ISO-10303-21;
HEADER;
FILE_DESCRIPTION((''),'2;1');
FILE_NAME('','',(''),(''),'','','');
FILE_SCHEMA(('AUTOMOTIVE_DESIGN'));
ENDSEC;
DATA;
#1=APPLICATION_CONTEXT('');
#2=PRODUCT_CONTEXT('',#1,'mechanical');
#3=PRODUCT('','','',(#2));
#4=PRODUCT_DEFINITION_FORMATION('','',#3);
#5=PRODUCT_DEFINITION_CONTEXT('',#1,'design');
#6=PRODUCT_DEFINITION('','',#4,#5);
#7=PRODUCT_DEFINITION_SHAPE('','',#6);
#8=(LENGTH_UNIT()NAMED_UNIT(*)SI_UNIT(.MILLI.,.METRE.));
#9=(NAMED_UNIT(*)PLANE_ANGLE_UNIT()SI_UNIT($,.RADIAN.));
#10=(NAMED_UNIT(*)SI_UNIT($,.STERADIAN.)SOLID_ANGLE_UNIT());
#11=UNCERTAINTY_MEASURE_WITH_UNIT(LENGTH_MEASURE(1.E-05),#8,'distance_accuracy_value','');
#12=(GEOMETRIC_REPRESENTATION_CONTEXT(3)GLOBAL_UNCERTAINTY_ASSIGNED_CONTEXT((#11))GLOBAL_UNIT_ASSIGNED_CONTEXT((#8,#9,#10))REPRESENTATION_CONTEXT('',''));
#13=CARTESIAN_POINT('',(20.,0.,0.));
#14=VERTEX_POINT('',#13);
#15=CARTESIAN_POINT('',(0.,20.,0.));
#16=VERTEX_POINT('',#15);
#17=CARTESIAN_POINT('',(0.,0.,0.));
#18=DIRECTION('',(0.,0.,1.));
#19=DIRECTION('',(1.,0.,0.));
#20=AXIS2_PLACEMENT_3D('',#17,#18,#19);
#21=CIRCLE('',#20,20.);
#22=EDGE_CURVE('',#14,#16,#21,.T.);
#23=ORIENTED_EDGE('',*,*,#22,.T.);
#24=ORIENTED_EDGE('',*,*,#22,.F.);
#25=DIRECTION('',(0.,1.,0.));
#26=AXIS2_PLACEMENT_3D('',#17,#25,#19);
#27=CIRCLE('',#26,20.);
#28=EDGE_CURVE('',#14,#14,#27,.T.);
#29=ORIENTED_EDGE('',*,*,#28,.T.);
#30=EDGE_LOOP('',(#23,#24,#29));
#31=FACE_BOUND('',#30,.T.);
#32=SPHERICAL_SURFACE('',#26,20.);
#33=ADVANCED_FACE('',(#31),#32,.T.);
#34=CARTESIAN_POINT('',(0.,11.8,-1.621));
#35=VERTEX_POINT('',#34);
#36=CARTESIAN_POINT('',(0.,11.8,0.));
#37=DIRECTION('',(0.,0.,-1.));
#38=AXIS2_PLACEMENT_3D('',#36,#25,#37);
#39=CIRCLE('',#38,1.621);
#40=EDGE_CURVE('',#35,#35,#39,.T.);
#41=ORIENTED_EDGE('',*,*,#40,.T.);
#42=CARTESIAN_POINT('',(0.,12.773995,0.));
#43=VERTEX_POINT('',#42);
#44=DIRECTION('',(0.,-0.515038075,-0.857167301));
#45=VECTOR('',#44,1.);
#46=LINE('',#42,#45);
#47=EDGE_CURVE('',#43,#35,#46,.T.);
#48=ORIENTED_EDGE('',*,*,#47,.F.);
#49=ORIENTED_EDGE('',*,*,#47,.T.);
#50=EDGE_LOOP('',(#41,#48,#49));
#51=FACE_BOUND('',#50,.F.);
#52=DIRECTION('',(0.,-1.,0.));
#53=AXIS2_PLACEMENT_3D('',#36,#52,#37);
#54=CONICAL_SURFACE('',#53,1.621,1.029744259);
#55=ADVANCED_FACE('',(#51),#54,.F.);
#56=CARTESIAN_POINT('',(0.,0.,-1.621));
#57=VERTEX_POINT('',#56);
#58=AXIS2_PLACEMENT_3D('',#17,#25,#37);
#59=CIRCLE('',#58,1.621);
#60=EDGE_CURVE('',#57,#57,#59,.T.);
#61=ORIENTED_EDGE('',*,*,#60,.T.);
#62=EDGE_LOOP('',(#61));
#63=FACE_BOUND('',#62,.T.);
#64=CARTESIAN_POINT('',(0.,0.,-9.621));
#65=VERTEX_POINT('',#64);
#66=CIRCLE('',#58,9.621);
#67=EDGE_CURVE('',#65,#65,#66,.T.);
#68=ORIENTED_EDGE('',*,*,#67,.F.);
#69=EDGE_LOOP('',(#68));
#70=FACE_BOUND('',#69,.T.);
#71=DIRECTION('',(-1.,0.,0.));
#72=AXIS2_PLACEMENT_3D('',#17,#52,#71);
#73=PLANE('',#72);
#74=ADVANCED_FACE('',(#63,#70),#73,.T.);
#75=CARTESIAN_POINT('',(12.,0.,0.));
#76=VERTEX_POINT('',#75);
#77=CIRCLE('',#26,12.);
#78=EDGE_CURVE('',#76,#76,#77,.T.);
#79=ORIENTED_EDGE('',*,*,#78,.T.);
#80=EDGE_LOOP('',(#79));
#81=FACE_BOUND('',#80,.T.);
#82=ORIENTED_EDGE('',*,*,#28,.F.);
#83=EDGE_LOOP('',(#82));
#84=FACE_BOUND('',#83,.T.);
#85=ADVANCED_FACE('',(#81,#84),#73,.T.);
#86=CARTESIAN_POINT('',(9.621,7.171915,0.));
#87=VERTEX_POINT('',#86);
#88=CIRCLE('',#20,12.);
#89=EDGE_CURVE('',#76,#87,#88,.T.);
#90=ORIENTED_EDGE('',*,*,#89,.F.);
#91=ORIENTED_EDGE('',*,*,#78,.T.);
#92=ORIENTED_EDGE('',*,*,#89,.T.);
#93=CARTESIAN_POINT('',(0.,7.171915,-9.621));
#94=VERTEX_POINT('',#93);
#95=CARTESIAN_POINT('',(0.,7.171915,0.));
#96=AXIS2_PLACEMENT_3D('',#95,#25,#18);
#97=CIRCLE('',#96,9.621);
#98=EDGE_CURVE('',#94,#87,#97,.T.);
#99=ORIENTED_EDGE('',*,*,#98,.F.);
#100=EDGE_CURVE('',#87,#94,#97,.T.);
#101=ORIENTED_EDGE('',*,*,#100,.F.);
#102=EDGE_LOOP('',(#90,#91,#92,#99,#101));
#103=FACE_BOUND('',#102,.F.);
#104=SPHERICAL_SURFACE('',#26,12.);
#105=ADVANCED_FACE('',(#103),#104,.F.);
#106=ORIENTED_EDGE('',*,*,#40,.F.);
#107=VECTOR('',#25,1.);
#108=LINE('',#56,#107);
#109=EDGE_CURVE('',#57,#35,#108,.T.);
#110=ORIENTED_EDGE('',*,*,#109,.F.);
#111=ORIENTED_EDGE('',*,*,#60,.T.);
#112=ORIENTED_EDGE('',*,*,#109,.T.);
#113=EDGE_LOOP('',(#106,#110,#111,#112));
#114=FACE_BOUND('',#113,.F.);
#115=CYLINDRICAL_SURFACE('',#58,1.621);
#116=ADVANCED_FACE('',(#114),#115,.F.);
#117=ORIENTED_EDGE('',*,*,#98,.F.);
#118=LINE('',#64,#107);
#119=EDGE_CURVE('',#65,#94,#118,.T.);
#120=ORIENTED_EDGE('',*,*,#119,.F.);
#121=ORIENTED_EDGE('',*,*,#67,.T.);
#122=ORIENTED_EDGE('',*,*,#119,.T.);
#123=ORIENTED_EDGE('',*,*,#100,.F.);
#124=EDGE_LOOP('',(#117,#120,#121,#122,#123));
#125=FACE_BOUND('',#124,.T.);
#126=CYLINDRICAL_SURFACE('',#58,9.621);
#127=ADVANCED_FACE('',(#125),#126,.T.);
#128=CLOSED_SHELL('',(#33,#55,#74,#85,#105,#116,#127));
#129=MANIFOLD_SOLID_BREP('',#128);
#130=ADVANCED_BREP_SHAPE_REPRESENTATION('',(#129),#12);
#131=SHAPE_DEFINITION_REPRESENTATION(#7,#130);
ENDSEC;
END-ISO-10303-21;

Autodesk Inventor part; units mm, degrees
ref_plane "YZ Plane" through (0, 0, 0) normal (1, 0, 0) x (0, 1, 0)
ref_plane "XZ Plane" through (0, 0, 0) normal (0, 1, 0) x (-1, 0, 0)
ref_plane "XY Plane" through (0, 0, 0) normal (0, 0, 1) x (1, 0, 0)
sketch "Sketch1" plane through (0, 0, 0) normal (0, 0, 1) x (1, 0, 0)
  line L0 (0, 0) -> (0, 20)
  line L1 (0, 0) -> (20, 0)
  arc A0 (20, 0) -> (0, 20) centre (0, 0) ccw
  line L2 (0, -4.8284) -> (0, 28.9706) projected
  dimension "d2" = 20
revolve "Revolution1" add sketch "Sketch1" angle 360 about axis through (0, -10, 0) along (0, 1, 0)
sketch "Sketch4" plane through (0, 0, 0) normal (0, -1, 0) x (1, 0, 0)
  point P0 (0, 0)
  point P1 (0, 0)
hole "Hole2" at (0, 0, 0) direction (0, 1, 0) diameter 3.242 depth 11.8 tip angle 118 thread size "M4x0.7" class "6H" standard "ANSI Metric M Profile"
shell "Shell2" thickness 8 removed faces 1 at (13.676, 0, 1.6606)
properties part number "Ball_Upper Half" material "Nylon 6/6"
